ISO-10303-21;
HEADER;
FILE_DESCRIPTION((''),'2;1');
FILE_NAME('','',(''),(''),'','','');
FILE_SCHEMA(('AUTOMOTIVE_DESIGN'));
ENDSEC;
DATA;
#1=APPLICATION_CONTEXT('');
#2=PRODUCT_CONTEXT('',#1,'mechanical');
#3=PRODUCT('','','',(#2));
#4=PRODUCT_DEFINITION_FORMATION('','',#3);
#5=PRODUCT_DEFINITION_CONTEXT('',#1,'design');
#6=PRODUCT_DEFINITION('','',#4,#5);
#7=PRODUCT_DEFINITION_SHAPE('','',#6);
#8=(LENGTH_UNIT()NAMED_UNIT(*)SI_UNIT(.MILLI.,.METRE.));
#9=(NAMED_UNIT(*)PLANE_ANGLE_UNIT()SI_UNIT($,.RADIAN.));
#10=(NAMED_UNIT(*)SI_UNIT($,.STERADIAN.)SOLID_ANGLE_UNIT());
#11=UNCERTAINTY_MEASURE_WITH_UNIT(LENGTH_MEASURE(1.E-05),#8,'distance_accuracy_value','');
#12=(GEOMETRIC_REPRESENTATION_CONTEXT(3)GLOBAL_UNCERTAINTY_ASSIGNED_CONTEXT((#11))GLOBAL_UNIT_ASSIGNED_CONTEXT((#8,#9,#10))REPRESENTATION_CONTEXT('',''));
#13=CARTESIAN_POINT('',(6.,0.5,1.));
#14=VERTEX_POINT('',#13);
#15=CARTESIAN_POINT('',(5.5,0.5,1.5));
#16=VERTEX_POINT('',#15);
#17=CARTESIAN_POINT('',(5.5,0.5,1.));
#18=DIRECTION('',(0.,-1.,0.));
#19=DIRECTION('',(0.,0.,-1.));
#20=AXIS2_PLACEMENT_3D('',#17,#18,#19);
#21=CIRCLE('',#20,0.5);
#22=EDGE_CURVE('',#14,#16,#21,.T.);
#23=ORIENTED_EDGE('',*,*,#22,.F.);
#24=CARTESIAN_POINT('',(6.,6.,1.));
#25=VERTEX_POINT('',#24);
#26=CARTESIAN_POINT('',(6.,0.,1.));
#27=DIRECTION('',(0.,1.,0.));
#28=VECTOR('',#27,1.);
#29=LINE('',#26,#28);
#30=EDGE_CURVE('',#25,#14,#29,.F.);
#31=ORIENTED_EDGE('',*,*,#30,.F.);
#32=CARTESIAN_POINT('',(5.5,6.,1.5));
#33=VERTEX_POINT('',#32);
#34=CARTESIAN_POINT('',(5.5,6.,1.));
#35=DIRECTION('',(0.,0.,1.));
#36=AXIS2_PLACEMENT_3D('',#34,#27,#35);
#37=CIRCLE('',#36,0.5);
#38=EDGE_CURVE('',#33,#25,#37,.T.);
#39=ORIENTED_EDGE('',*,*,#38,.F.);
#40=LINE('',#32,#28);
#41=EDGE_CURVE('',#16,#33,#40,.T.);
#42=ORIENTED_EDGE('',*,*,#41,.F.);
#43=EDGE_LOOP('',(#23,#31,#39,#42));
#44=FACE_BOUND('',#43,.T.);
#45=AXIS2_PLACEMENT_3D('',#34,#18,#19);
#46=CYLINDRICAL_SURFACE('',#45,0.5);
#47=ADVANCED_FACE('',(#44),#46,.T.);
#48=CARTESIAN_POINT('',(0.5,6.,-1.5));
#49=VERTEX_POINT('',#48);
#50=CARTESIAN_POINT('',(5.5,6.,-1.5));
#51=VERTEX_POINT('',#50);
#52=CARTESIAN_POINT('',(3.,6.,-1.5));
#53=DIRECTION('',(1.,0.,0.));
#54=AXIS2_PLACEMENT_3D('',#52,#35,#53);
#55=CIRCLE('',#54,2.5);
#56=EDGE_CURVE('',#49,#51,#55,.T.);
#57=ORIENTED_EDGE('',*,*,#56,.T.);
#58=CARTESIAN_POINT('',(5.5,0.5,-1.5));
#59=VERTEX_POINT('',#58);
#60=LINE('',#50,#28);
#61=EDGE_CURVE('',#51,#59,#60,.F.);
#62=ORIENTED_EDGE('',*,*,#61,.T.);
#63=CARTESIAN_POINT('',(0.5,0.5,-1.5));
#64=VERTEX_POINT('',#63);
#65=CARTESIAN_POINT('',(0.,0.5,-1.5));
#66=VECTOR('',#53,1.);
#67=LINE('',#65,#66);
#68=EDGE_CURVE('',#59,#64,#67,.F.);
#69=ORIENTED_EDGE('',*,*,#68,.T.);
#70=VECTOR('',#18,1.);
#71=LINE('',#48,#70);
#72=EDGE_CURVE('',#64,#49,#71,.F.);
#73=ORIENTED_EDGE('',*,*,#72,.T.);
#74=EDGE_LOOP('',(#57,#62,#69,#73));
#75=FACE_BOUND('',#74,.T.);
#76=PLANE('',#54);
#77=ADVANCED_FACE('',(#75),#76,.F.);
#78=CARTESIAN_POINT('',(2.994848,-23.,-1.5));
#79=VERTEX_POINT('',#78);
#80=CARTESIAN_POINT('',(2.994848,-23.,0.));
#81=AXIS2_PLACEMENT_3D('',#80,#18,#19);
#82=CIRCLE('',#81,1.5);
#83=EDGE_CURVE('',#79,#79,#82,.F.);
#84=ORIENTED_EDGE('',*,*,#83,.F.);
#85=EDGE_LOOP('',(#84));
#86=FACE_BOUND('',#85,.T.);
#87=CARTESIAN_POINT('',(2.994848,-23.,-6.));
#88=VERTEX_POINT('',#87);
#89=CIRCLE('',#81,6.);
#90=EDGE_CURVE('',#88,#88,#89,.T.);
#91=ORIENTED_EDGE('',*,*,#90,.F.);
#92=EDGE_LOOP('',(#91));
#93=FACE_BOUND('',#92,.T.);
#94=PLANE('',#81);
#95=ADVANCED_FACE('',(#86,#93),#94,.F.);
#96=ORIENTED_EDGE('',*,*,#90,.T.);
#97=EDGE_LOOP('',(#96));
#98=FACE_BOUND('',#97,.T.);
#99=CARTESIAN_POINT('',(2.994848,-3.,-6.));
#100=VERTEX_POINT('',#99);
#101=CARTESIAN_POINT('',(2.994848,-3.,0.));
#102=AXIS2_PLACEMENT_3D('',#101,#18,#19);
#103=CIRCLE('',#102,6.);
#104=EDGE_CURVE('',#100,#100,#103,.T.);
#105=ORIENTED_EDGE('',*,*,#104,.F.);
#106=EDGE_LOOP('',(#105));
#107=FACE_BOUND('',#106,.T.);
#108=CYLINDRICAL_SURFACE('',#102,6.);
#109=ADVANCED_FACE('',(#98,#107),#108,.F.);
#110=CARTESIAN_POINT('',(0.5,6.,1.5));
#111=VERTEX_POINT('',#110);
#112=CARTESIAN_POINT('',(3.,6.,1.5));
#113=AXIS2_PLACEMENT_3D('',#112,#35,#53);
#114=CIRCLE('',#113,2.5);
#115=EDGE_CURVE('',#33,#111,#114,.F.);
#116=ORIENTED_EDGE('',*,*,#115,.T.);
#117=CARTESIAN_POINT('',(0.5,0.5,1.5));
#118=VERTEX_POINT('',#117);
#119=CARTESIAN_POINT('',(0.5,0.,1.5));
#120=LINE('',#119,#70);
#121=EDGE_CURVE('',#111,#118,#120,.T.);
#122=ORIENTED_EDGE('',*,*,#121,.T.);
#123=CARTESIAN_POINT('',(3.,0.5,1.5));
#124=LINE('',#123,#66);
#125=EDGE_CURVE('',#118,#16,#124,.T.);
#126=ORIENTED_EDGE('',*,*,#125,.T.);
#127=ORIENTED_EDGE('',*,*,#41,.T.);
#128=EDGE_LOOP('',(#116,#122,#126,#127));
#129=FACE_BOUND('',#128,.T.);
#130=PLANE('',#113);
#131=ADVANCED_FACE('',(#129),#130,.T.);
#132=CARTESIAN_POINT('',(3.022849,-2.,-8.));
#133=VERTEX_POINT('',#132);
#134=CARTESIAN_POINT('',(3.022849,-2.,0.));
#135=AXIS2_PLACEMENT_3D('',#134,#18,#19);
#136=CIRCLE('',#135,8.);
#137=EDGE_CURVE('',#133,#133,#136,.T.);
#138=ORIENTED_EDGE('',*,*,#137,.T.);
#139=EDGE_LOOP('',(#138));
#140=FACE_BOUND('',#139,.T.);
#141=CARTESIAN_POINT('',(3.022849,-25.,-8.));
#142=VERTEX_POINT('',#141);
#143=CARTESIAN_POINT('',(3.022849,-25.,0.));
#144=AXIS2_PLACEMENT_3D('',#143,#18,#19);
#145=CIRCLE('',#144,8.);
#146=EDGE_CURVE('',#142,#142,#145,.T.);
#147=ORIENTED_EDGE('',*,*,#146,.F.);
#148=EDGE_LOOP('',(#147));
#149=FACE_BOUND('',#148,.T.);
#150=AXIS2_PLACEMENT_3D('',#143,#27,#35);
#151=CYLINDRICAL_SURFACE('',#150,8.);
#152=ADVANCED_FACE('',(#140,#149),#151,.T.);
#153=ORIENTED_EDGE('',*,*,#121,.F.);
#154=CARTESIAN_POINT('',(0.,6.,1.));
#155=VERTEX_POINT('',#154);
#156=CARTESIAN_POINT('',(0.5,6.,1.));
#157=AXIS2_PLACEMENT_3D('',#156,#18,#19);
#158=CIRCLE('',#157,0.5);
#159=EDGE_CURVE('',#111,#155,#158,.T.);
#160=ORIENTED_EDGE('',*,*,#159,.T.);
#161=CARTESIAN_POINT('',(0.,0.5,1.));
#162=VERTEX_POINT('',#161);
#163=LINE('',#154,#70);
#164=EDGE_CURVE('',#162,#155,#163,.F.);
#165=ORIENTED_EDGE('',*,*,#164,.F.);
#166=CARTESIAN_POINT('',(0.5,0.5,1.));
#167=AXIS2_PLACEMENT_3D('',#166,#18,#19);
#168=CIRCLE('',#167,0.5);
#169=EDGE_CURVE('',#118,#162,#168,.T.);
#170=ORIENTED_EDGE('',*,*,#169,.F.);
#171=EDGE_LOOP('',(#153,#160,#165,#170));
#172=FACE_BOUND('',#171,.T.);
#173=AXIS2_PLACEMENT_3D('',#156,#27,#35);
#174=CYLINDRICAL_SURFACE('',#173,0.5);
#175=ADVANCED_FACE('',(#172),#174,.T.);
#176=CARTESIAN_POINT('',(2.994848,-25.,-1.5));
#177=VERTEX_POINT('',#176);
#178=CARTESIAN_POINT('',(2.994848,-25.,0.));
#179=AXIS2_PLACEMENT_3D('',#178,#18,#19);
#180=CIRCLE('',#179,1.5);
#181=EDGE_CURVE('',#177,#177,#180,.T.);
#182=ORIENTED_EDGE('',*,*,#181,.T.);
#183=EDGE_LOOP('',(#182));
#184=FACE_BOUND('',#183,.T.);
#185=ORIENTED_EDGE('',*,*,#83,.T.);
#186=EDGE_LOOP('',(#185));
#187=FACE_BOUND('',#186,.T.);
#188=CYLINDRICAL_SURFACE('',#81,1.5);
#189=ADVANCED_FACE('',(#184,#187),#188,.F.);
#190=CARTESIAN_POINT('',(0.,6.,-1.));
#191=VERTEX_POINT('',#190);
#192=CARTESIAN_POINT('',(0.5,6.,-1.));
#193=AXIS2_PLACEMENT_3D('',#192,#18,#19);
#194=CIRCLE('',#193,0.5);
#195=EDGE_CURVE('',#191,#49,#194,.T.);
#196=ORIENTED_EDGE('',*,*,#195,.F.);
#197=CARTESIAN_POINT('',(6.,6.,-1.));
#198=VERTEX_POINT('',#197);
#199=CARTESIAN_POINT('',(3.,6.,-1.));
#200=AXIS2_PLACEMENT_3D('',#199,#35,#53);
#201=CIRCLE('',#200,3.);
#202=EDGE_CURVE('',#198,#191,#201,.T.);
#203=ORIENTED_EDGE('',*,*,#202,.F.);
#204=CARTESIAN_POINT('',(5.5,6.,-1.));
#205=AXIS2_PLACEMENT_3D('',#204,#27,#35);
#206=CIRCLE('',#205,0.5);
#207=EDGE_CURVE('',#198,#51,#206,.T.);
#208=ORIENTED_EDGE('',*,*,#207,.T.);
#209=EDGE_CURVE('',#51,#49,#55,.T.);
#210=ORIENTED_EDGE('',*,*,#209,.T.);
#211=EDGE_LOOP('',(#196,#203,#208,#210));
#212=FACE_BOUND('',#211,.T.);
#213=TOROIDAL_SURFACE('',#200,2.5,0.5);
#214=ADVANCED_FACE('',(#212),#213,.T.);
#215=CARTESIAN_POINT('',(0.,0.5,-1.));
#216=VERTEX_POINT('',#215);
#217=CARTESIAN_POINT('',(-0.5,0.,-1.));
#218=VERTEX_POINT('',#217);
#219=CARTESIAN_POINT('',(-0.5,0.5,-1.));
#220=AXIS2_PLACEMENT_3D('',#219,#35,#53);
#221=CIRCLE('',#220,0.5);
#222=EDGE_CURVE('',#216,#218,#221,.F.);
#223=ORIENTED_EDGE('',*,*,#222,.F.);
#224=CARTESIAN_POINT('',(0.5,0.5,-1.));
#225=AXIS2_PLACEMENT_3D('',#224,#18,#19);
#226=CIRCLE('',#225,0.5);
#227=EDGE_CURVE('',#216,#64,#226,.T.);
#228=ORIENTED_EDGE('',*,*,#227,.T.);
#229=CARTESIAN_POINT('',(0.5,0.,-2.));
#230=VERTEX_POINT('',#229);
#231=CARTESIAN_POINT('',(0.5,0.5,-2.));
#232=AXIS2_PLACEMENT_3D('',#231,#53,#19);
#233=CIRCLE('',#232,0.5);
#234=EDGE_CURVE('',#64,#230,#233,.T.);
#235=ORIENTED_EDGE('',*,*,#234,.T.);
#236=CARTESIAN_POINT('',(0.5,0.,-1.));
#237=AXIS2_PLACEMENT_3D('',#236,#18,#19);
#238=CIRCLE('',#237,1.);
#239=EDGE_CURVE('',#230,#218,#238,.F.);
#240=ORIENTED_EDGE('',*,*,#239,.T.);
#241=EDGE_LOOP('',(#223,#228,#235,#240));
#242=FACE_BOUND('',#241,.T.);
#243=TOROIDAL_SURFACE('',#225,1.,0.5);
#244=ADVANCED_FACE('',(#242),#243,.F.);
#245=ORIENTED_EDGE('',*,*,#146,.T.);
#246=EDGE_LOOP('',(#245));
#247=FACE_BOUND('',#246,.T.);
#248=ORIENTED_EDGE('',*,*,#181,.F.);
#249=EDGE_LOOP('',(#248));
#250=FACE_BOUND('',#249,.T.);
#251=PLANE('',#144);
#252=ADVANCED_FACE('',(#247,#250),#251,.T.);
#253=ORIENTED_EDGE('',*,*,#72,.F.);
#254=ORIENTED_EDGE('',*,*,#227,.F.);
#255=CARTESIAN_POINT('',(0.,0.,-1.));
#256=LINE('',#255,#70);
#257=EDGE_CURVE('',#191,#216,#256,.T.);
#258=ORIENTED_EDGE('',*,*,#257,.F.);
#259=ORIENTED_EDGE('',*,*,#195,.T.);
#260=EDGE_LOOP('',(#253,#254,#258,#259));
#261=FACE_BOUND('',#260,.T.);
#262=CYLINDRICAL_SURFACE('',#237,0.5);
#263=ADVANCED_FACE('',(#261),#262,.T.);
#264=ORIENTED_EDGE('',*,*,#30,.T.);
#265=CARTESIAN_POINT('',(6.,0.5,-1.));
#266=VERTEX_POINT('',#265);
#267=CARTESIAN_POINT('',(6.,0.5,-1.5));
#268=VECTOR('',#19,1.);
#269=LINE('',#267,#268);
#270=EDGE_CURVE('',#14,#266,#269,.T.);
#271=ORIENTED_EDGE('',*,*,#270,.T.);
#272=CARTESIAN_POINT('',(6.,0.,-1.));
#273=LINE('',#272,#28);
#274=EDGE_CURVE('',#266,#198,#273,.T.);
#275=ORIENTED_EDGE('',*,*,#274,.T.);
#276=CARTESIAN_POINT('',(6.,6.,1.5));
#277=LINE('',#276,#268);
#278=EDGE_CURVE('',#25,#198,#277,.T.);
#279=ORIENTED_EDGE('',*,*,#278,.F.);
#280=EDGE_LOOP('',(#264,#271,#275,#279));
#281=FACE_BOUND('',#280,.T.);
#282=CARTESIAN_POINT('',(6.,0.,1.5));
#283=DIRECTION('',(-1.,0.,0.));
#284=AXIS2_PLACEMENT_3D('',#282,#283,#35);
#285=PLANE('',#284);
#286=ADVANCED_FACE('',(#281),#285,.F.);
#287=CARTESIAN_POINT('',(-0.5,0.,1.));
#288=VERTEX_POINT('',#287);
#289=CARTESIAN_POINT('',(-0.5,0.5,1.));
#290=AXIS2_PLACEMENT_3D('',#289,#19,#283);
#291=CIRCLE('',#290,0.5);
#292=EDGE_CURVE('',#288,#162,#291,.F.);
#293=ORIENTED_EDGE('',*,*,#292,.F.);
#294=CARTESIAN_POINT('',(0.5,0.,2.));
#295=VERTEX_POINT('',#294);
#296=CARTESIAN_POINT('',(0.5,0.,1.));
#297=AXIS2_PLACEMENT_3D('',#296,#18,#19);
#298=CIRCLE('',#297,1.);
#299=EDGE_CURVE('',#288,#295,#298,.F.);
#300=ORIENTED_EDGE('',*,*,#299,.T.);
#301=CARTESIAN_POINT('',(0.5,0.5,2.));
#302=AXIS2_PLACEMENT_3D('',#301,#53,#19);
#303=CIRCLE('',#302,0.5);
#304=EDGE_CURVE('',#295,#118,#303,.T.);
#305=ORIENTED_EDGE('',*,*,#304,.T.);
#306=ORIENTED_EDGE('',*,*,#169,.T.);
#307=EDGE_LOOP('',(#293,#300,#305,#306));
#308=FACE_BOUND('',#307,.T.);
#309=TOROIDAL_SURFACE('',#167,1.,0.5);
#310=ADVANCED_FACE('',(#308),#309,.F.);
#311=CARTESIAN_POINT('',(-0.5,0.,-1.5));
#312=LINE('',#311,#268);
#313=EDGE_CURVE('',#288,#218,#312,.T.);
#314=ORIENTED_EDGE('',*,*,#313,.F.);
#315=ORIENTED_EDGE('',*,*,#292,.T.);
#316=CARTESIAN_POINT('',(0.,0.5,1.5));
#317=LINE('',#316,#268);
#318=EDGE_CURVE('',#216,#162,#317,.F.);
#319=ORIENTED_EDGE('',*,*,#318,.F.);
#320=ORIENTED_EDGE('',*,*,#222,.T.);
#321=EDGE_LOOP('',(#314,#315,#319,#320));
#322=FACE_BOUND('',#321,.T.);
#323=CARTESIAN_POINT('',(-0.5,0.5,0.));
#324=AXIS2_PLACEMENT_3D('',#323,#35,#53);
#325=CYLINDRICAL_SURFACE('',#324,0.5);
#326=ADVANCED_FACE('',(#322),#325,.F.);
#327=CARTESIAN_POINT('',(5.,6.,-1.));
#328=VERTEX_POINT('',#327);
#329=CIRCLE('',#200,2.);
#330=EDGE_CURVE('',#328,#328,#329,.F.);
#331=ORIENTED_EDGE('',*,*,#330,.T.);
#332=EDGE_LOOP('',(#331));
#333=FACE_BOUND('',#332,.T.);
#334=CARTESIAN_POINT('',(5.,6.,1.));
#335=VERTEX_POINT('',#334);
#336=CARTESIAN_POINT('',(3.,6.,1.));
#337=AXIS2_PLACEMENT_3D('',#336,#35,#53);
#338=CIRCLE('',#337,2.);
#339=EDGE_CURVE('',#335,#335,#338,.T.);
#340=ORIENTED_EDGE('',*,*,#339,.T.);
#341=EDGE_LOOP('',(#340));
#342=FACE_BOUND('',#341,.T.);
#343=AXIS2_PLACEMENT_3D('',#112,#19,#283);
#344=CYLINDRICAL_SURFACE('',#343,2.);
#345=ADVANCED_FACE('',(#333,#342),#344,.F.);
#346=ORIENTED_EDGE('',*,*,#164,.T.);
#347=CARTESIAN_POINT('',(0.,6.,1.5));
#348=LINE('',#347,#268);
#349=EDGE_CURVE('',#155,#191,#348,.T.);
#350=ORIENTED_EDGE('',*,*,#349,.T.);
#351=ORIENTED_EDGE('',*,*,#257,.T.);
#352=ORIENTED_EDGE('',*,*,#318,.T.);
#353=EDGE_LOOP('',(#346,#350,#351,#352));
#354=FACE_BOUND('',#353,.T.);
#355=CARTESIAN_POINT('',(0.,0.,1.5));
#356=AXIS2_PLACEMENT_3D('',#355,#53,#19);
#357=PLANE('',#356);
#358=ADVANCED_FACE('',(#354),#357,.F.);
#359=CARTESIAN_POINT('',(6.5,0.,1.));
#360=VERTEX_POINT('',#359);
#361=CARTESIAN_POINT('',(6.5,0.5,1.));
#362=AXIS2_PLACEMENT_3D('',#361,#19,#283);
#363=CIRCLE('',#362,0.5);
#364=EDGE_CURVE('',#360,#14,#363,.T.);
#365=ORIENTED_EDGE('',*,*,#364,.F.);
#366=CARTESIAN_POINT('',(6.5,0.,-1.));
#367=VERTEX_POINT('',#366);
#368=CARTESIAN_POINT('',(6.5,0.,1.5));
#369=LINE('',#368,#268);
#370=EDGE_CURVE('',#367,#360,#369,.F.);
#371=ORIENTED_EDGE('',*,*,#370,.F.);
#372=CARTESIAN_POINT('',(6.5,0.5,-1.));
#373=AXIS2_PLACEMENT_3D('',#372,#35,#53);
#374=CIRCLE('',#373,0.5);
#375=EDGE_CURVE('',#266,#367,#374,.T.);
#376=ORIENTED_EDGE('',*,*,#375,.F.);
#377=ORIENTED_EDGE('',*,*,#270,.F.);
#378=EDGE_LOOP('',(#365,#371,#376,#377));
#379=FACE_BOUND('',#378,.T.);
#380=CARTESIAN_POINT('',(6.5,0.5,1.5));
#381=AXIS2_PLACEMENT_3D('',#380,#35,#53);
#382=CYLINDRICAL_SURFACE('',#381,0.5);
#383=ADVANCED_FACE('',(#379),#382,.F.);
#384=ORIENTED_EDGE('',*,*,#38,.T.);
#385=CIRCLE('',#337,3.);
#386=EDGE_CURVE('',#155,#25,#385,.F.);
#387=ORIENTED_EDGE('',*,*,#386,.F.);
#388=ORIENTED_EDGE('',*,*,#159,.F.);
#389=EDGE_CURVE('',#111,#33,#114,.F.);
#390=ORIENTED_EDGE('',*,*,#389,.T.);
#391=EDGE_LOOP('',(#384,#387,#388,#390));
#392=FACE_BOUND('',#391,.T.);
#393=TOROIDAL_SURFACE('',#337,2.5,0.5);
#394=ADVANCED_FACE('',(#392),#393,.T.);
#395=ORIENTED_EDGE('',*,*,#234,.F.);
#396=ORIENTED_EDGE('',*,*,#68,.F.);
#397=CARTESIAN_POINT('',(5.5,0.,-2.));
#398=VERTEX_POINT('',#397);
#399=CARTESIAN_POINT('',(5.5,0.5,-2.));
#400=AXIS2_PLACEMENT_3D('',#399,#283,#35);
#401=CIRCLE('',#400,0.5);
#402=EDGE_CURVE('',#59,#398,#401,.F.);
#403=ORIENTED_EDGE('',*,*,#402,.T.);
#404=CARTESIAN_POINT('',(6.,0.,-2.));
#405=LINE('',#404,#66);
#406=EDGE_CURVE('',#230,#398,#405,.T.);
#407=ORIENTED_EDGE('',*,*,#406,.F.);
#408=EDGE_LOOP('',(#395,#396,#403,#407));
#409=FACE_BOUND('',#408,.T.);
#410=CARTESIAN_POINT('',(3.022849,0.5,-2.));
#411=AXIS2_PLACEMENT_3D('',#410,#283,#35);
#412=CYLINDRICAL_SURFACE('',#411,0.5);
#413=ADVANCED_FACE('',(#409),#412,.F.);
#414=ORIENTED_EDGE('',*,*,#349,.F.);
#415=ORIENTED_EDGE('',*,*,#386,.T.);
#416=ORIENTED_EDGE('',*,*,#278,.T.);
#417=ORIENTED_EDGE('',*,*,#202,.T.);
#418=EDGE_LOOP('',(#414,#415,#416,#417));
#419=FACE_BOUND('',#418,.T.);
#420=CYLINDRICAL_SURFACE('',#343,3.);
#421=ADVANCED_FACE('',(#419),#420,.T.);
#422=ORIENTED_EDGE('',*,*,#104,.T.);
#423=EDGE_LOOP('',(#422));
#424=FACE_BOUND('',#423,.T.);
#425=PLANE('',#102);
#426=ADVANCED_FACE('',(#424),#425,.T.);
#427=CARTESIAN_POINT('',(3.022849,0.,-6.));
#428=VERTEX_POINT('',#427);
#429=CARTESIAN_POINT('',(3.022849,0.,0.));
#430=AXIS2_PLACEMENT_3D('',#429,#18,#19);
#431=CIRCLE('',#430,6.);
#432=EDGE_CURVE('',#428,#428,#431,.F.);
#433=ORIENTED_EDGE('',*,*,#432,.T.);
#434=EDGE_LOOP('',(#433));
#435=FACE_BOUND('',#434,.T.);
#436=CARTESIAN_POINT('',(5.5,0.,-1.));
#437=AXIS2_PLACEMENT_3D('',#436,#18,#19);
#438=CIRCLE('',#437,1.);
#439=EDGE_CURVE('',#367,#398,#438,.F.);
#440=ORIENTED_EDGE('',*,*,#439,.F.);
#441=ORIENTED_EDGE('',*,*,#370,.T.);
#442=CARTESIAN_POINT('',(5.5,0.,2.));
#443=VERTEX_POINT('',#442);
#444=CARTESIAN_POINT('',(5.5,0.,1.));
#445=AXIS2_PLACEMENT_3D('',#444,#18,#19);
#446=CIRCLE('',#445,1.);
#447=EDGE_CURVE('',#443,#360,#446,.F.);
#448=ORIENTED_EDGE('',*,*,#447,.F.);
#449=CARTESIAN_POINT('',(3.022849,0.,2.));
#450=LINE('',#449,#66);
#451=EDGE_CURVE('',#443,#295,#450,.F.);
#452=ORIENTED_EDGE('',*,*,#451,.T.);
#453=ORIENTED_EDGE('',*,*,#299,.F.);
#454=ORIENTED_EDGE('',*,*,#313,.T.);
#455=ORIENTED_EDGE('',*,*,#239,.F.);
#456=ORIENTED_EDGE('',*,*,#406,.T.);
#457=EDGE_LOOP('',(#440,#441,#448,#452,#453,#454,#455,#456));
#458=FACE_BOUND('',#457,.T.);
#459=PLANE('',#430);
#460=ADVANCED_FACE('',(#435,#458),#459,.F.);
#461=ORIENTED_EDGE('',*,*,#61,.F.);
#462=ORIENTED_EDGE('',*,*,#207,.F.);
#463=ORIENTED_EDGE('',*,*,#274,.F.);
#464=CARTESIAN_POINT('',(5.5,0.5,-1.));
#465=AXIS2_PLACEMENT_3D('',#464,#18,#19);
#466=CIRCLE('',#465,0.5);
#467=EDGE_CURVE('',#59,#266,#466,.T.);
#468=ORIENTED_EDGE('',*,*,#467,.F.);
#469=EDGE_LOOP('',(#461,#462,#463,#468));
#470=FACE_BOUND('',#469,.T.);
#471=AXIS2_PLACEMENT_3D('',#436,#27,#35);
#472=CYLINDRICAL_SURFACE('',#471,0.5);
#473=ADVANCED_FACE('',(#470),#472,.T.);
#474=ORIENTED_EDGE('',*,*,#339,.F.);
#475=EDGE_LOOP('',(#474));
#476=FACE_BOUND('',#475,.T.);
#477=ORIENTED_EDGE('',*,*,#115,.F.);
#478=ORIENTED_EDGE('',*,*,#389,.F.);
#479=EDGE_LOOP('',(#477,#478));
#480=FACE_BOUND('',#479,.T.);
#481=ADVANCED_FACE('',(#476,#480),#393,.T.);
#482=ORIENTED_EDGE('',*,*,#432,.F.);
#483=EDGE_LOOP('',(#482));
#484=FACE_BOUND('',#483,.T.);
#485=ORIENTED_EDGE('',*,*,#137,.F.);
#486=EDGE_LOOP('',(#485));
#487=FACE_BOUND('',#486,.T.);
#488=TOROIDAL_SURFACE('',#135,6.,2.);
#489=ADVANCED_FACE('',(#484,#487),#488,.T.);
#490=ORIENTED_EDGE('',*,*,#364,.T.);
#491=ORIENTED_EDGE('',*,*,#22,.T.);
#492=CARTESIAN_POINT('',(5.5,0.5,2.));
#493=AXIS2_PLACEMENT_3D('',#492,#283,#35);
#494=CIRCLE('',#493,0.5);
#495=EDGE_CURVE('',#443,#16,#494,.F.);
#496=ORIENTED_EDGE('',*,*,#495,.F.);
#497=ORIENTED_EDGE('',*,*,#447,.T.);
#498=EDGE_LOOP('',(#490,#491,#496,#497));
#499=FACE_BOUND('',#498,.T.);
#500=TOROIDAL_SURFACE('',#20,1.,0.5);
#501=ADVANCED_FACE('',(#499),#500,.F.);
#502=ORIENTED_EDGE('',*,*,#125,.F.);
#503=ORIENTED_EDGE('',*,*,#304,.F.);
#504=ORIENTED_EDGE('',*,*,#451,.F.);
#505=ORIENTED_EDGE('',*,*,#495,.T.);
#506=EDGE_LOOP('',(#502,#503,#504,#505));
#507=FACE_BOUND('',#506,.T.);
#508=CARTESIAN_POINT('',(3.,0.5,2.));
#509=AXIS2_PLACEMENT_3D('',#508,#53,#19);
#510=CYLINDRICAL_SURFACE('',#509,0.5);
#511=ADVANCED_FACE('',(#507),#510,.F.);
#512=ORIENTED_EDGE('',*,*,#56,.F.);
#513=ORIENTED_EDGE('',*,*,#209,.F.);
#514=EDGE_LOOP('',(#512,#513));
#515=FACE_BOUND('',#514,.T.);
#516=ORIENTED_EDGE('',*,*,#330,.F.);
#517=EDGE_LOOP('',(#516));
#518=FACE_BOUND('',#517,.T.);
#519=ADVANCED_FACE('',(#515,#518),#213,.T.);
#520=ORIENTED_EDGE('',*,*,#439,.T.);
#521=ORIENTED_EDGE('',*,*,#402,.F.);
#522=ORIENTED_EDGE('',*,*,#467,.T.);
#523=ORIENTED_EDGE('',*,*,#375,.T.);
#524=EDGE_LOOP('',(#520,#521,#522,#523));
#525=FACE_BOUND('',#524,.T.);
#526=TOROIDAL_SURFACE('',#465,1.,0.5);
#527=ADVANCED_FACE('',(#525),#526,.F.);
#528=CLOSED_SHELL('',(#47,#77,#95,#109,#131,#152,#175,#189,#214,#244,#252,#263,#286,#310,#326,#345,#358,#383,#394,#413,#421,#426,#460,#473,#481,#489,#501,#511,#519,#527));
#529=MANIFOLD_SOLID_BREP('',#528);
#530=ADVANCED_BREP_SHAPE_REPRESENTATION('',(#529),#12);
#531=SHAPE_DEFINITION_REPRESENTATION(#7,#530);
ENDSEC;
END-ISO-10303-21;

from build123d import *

# Parameters (mm, degrees)
SKETCH_1_R          = 2
EXTRUDE_1_DEPTH     = 1.5
SKETCH_2_R          = 8
EXTRUDE_2_DEPTH     = 25
SKETCH_3_R          = 1.5
CUT_EXTRUDE_1_DEPTH = 2
SKETCH_4_R          = 6
CUT_EXTRUDE_2_DEPTH = 20
FILLET_5_R          = 0.5
FILLET_6_R          = 2


with BuildPart() as part:
    # 草图1 → 凸台-拉伸1 (new, symmetric)
    with BuildSketch(Plane.XY):
        with BuildLine():
            Line((0, 0), (6, 0))
            Line((6, 0), (6, 6))
            ThreePointArc((6, 6), (3, 9), (0, 6))
            Line((0, 6), (0, 0))
        make_face()
        with Locations((3, 6)):
            Circle(SKETCH_1_R, mode=Mode.SUBTRACT)
    extrude(amount=EXTRUDE_1_DEPTH, both=True)

    # 草图2 → 凸台-拉伸2 (add)
    with BuildSketch(Plane.XZ):
        with Locations(Location((3.022849102, 0, 0), (0, 0, 270))):
            Circle(SKETCH_2_R)
    extrude(amount=EXTRUDE_2_DEPTH)

    # 草图3 → 切除-拉伸1 (cut)
    with BuildSketch(Plane.XZ.offset(25)):
        with Locations(Location((2.994848376, 0, 0), (0, 0, 270))):
            Circle(SKETCH_3_R)
    extrude(amount=-CUT_EXTRUDE_1_DEPTH, mode=Mode.SUBTRACT)

    # 草图4 → 切除-拉伸2 (cut)
    with BuildSketch(Plane.XZ.offset(23)):
        with Locations(Location((2.994848376, 0, 0), (0, 0, 270))):
            Circle(SKETCH_4_R)
    extrude(amount=-CUT_EXTRUDE_2_DEPTH, mode=Mode.SUBTRACT)

    # 圆角5
    fillet_5_edges = [part.edges().sort_by_distance(p)[0] for p in [
        (6, 3, 1.5),
        (1, 6, -1.5),
        (1, 6, 1.5),
        (3, 9, 1.5),
        (0, 3, 1.5),
        (3, 9, -1.5),
        (6, 3, -1.5),
        (3, 0, -1.5),
        (0, 3, -1.5),
        (3, 0, 1.5),
        (6, 0, 0),
        (0, 0, 0),
    ]]
    fillet(fillet_5_edges, radius=FILLET_5_R - 0.0001)  # a hair under: the kernel refuses the full size

    # 圆角6
    fillet_6_edges = [part.edges().sort_by_distance(p)[0] for p in [
        (3.022849102, 0, 8),
    ]]
    fillet(fillet_6_edges, radius=FILLET_6_R)


solid = part.part
